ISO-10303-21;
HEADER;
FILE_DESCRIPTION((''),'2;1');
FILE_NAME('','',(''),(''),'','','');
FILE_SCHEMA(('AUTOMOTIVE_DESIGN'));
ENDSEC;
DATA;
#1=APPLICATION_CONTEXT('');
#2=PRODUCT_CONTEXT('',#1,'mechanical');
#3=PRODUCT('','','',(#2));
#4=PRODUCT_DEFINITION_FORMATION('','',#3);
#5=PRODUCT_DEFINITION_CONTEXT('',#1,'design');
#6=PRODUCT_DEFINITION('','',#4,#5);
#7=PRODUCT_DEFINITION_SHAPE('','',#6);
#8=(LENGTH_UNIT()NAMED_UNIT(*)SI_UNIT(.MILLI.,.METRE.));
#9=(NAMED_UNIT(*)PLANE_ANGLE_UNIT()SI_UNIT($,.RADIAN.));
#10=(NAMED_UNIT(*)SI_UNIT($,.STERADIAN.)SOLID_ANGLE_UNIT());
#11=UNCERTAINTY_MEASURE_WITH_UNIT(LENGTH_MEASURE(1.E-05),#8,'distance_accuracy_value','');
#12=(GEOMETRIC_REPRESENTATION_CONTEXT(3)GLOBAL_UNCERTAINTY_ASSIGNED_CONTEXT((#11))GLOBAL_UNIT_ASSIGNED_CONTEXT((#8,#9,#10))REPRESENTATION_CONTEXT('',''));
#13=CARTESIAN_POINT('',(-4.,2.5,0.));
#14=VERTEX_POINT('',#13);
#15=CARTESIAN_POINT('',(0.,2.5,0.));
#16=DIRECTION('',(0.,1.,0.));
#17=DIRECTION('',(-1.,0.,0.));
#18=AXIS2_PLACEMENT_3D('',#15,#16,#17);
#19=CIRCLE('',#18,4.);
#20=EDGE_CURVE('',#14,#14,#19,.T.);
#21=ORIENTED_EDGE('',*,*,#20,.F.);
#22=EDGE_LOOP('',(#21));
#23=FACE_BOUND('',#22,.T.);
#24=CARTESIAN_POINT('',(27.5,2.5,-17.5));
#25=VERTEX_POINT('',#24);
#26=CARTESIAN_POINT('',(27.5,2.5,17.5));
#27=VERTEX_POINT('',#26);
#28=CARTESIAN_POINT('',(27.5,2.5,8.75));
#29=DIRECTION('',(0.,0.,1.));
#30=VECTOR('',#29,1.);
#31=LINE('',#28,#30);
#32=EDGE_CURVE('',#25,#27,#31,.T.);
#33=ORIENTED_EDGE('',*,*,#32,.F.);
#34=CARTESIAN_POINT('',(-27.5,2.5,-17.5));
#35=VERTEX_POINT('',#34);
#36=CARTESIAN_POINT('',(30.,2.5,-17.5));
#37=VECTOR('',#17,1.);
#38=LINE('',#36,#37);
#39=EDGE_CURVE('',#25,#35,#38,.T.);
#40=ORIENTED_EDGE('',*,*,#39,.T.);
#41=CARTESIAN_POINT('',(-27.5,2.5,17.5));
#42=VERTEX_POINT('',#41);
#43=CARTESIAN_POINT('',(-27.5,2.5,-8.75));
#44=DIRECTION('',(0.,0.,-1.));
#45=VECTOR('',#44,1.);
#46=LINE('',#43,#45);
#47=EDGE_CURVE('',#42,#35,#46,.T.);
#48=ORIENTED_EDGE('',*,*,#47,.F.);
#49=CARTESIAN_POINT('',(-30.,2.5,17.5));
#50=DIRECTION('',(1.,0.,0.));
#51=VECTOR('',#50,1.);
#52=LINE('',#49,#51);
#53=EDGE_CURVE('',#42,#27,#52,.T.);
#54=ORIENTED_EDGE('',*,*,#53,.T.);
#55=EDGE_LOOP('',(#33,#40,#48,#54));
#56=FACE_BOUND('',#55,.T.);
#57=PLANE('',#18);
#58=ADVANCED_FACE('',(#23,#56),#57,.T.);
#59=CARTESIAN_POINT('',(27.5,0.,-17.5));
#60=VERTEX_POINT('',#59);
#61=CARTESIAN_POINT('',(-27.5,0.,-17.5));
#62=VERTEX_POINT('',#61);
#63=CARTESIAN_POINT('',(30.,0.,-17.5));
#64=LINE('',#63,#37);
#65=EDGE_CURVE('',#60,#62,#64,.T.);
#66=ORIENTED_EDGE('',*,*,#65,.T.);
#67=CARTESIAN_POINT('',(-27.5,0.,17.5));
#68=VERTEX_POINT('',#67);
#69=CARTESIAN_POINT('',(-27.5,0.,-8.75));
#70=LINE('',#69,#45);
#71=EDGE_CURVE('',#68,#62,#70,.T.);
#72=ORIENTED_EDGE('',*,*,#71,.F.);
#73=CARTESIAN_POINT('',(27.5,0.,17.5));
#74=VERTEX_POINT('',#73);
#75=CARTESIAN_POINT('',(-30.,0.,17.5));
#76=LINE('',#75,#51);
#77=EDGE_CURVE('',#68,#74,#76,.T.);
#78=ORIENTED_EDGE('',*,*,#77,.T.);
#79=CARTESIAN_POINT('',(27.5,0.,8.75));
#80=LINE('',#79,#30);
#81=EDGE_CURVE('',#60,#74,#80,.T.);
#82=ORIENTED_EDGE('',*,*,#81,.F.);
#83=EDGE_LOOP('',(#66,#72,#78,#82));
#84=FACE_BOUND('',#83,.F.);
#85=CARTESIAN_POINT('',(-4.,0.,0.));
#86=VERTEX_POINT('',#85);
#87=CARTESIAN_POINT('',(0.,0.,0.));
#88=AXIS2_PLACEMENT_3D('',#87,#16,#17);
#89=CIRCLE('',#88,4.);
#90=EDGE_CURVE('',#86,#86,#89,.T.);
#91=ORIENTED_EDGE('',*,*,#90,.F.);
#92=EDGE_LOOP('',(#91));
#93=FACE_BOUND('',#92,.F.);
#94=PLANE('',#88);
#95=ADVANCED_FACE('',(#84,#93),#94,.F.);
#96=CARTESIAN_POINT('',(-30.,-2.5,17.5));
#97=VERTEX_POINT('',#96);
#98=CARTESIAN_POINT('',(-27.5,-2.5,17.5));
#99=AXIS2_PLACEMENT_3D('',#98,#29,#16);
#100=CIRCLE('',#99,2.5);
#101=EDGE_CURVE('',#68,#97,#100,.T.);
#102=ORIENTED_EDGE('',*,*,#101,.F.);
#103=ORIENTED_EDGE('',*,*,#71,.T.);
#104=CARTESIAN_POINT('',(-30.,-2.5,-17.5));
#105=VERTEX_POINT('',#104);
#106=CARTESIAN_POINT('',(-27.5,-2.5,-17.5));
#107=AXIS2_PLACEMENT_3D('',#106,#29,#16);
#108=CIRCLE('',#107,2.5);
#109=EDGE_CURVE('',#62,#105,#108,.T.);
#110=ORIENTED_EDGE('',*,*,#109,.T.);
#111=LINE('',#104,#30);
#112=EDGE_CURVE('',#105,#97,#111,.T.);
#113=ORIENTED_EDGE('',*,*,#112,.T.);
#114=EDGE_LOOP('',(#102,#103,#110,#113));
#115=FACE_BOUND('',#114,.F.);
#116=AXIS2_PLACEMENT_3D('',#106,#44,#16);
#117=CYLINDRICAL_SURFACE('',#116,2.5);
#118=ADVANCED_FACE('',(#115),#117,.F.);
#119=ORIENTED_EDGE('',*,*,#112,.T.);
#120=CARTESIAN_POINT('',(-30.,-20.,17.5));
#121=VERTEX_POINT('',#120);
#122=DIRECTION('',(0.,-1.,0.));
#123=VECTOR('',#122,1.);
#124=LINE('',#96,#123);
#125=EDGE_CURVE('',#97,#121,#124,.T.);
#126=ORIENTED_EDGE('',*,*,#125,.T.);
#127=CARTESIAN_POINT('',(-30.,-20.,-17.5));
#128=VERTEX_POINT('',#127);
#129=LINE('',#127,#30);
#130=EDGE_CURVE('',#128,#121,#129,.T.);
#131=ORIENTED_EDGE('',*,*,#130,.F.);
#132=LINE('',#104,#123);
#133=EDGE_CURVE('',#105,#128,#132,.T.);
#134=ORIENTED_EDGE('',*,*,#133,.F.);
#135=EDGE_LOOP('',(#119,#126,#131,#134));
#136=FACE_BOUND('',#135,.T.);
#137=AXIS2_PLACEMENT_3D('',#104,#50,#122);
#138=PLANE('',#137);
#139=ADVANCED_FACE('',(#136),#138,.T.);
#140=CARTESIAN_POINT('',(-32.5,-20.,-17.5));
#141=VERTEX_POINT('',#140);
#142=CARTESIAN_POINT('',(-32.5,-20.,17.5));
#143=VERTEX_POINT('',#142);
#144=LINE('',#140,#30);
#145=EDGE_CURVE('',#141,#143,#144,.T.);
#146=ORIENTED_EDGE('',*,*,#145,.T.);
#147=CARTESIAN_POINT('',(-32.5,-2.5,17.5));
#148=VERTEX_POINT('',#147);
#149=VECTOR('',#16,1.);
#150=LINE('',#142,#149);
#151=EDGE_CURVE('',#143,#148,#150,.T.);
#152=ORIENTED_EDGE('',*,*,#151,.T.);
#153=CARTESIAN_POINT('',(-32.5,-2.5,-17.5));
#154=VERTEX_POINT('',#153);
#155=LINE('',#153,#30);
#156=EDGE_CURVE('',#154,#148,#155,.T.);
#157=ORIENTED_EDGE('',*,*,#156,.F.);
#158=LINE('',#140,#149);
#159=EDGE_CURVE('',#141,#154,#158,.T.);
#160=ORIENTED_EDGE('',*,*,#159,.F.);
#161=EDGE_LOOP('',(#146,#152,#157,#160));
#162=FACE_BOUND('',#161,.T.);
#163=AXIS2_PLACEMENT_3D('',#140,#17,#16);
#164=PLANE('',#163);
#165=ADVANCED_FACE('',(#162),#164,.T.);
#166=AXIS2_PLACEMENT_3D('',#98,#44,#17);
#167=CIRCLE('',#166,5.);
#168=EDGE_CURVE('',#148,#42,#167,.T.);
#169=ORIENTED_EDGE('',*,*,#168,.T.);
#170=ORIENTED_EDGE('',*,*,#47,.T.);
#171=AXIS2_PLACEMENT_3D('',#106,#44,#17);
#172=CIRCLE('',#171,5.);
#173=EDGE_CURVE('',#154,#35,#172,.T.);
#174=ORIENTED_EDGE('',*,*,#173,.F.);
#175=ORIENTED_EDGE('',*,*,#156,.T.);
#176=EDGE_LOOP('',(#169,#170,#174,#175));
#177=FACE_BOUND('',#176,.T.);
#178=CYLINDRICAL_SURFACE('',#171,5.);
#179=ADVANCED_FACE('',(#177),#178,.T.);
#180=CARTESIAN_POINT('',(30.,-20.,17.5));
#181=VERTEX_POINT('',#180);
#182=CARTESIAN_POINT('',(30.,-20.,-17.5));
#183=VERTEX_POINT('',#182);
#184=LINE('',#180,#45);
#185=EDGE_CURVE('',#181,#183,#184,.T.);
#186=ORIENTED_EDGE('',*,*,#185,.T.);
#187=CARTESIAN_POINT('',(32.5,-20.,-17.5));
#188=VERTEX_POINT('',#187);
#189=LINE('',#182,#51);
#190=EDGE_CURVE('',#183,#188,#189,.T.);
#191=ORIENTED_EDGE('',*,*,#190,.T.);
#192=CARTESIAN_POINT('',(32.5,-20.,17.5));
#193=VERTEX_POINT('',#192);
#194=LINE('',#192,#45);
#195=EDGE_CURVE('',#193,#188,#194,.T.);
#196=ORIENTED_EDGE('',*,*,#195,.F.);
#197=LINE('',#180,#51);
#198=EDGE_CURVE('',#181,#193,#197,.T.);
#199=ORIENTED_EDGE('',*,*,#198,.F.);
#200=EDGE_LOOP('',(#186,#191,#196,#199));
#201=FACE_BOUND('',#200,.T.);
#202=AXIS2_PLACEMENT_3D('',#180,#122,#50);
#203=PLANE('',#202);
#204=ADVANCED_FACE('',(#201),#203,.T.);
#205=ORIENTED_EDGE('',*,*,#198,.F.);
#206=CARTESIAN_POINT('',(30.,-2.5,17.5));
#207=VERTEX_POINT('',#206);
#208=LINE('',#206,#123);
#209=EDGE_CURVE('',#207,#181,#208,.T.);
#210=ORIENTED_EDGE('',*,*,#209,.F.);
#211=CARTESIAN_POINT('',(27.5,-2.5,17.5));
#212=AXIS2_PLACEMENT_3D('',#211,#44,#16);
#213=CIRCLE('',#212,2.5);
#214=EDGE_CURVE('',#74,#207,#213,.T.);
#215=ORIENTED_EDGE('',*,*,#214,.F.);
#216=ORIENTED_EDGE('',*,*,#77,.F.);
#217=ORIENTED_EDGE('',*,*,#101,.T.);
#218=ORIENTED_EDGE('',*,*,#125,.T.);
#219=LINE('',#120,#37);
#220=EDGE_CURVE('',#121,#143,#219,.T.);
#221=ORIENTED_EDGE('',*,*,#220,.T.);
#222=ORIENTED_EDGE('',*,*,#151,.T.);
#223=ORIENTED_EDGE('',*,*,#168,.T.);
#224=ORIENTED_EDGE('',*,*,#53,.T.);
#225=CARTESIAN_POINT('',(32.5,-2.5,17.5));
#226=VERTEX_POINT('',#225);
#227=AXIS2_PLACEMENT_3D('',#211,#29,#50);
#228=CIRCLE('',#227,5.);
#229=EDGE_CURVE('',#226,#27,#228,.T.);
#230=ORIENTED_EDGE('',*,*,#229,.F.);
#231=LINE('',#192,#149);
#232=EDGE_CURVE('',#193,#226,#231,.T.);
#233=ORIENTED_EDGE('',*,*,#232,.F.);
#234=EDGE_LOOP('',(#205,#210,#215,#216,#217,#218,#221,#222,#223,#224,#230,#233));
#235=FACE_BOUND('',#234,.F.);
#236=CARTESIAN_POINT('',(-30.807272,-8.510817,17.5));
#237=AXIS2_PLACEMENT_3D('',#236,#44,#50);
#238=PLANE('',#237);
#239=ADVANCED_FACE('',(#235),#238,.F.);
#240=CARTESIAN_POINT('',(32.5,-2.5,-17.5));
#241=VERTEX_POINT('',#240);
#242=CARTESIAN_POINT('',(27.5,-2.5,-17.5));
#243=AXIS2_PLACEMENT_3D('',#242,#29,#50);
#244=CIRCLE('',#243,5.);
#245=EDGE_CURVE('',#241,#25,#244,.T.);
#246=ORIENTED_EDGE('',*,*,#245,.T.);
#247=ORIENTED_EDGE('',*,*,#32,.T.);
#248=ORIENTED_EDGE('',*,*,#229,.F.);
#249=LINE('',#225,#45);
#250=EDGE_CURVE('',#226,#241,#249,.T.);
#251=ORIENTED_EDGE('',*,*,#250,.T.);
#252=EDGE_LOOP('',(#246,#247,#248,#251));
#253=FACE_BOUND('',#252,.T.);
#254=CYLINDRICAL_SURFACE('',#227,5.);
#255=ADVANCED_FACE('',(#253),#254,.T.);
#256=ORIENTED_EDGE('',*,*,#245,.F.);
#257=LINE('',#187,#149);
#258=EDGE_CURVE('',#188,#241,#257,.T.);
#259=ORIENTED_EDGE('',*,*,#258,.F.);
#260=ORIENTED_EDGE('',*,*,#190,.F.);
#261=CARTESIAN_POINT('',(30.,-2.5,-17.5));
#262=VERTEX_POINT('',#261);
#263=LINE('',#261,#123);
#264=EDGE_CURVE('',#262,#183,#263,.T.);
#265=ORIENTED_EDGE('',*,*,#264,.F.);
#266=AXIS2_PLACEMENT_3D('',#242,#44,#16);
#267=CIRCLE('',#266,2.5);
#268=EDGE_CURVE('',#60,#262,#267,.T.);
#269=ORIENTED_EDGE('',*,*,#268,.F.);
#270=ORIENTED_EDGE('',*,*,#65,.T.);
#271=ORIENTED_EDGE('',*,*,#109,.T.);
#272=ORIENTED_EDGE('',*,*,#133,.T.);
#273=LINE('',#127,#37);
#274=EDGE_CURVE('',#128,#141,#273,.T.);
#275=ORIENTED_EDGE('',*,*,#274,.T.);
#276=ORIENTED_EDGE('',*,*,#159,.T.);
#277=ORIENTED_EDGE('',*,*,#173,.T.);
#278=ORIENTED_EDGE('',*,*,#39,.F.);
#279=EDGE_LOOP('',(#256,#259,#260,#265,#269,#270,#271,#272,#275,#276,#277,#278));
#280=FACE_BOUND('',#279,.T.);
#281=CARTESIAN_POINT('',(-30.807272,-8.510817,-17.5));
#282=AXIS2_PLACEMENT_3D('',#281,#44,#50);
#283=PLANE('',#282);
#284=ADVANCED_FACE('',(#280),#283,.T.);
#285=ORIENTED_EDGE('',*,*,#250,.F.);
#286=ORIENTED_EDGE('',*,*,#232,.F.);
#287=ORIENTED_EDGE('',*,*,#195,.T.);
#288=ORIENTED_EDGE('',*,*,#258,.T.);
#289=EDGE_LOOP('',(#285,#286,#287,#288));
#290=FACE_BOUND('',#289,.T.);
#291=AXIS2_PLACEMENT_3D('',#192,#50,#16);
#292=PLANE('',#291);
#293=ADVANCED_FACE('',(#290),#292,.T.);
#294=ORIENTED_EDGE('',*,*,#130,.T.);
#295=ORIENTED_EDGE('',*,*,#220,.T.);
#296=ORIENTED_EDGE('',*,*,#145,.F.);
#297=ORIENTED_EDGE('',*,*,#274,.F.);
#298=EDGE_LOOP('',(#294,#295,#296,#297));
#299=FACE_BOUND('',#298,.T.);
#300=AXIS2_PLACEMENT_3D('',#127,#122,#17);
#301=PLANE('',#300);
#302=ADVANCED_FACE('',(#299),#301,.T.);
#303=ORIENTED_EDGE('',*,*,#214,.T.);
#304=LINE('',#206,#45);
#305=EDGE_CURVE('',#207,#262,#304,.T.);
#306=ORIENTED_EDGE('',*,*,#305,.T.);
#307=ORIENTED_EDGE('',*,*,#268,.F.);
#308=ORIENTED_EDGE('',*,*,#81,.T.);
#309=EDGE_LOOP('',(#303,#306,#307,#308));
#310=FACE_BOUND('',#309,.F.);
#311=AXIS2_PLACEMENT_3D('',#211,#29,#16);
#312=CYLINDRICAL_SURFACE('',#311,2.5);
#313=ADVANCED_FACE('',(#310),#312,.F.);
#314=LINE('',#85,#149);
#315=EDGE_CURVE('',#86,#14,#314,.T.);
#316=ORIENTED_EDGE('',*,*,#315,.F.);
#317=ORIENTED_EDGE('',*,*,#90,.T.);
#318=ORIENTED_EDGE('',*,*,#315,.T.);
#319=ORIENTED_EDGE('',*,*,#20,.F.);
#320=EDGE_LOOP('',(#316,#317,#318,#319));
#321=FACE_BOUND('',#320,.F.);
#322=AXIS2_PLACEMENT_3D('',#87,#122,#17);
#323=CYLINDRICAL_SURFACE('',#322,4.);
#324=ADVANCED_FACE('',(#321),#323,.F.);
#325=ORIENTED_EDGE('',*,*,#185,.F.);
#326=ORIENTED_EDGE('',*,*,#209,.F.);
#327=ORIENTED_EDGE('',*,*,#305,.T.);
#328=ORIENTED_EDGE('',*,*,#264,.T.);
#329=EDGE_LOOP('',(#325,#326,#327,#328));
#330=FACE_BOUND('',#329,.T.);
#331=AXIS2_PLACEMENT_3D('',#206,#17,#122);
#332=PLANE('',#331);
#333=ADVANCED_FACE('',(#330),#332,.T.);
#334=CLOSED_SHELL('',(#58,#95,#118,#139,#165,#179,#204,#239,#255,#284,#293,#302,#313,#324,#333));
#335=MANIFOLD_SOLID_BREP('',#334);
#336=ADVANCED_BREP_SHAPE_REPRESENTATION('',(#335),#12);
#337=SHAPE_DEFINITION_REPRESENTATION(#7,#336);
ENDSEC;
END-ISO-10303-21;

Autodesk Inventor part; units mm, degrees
ref_plane "YZ Plane" through (0, 0, 0) normal (1, 0, 0) x (0, 1, 0)
ref_plane "XZ Plane" through (0, 0, 0) normal (0, 1, 0) x (-1, 0, 0)
ref_plane "XY Plane" through (0, 0, 0) normal (0, 0, 1) x (1, 0, 0)
sketch "Náčrt2" plane through (0, 0, 0) normal (0, 1, 0) x (-1, 0, 0)
  line L0 (30, 17.5) -> (-30, 17.5)
  line L1 (-30, 17.5) -> (-30, -17.5)
  line L2 (-30, -17.5) -> (30, -17.5)
  line L3 (30, -17.5) -> (30, 17.5)
  circle A0 centre (0, 0) radius 4
  point P0 (30, 0)
  point P1 (0, 17.5)
  dimension "d0" = 60
  dimension "d1" = 35
  dimension "d22" = 8
extrude "Vysunutí1" add sketch "Náčrt2" along normal blind 2.5
sketch "Náčrt5" plane through (-30, 0, -17.5) normal (-1, 0, 0) x (0, -1, 0)
  line L0 (0, 35) -> (0, 0)
  line L1 (0, 0) -> (20, 0)
  line L2 (20, 0) -> (20, 35)
  line L3 (20, 35) -> (0, 35)
edge flange "Obruba2" height 22.5 angle 90 thickness 2.5 bend radius 2.5 thickness toward (-1, 0, 0) relief tear relief width 2.5 relief depth 1.25 corner gap 2.5 corner form 0 edges at (-30, 0, 0) (30, 0, 0) wall of the first edge with corners at (-30, 0, 17.5) (-30, 0, -17.5) (-30, -20, -17.5) (-30, -20, 17.5)
bend "Ohyb2"
corner "Roh2"
equation "\"d29\" = ŠířkaVýštipu"
equation "\"d30\" = HloubkaVýštipu"
equation "\"d31\" = MinimálníZbytek"
equation "\"d32\" = PoloměrOhybu"
equation "\"d35\" = PoloměrOhybu"
equation "\"d36\" = VelikostRohovéhoVýštipu"
equation "\"d37\" = VelikostMezery"
equation "\"d38\" = VelikostJacobihoPoloměru"
equation "\"PoloměrOhybu\" = Tloušťka"
equation "\"ŠířkaVýštipu\" = Tloušťka"
equation "\"HloubkaVýštipu\" = 0.5 * Tloušťka"
equation "\"MinimálníZbytek\" = 2 * Tloušťka"
equation "\"PřechodovýPoloměr\" = PoloměrOhybu"
equation "\"VelikostJacobihoPoloměru\" = PoloměrOhybu"
equation "\"VelikostMezery\" = Tloušťka"
equation "\"VelikostRohovéhoVýštipu\" = 10"
equation "\"Tloušťka\" = 2.5"
properties part number "DD_KVD_004_04_A" material "Nerezová ocel"
